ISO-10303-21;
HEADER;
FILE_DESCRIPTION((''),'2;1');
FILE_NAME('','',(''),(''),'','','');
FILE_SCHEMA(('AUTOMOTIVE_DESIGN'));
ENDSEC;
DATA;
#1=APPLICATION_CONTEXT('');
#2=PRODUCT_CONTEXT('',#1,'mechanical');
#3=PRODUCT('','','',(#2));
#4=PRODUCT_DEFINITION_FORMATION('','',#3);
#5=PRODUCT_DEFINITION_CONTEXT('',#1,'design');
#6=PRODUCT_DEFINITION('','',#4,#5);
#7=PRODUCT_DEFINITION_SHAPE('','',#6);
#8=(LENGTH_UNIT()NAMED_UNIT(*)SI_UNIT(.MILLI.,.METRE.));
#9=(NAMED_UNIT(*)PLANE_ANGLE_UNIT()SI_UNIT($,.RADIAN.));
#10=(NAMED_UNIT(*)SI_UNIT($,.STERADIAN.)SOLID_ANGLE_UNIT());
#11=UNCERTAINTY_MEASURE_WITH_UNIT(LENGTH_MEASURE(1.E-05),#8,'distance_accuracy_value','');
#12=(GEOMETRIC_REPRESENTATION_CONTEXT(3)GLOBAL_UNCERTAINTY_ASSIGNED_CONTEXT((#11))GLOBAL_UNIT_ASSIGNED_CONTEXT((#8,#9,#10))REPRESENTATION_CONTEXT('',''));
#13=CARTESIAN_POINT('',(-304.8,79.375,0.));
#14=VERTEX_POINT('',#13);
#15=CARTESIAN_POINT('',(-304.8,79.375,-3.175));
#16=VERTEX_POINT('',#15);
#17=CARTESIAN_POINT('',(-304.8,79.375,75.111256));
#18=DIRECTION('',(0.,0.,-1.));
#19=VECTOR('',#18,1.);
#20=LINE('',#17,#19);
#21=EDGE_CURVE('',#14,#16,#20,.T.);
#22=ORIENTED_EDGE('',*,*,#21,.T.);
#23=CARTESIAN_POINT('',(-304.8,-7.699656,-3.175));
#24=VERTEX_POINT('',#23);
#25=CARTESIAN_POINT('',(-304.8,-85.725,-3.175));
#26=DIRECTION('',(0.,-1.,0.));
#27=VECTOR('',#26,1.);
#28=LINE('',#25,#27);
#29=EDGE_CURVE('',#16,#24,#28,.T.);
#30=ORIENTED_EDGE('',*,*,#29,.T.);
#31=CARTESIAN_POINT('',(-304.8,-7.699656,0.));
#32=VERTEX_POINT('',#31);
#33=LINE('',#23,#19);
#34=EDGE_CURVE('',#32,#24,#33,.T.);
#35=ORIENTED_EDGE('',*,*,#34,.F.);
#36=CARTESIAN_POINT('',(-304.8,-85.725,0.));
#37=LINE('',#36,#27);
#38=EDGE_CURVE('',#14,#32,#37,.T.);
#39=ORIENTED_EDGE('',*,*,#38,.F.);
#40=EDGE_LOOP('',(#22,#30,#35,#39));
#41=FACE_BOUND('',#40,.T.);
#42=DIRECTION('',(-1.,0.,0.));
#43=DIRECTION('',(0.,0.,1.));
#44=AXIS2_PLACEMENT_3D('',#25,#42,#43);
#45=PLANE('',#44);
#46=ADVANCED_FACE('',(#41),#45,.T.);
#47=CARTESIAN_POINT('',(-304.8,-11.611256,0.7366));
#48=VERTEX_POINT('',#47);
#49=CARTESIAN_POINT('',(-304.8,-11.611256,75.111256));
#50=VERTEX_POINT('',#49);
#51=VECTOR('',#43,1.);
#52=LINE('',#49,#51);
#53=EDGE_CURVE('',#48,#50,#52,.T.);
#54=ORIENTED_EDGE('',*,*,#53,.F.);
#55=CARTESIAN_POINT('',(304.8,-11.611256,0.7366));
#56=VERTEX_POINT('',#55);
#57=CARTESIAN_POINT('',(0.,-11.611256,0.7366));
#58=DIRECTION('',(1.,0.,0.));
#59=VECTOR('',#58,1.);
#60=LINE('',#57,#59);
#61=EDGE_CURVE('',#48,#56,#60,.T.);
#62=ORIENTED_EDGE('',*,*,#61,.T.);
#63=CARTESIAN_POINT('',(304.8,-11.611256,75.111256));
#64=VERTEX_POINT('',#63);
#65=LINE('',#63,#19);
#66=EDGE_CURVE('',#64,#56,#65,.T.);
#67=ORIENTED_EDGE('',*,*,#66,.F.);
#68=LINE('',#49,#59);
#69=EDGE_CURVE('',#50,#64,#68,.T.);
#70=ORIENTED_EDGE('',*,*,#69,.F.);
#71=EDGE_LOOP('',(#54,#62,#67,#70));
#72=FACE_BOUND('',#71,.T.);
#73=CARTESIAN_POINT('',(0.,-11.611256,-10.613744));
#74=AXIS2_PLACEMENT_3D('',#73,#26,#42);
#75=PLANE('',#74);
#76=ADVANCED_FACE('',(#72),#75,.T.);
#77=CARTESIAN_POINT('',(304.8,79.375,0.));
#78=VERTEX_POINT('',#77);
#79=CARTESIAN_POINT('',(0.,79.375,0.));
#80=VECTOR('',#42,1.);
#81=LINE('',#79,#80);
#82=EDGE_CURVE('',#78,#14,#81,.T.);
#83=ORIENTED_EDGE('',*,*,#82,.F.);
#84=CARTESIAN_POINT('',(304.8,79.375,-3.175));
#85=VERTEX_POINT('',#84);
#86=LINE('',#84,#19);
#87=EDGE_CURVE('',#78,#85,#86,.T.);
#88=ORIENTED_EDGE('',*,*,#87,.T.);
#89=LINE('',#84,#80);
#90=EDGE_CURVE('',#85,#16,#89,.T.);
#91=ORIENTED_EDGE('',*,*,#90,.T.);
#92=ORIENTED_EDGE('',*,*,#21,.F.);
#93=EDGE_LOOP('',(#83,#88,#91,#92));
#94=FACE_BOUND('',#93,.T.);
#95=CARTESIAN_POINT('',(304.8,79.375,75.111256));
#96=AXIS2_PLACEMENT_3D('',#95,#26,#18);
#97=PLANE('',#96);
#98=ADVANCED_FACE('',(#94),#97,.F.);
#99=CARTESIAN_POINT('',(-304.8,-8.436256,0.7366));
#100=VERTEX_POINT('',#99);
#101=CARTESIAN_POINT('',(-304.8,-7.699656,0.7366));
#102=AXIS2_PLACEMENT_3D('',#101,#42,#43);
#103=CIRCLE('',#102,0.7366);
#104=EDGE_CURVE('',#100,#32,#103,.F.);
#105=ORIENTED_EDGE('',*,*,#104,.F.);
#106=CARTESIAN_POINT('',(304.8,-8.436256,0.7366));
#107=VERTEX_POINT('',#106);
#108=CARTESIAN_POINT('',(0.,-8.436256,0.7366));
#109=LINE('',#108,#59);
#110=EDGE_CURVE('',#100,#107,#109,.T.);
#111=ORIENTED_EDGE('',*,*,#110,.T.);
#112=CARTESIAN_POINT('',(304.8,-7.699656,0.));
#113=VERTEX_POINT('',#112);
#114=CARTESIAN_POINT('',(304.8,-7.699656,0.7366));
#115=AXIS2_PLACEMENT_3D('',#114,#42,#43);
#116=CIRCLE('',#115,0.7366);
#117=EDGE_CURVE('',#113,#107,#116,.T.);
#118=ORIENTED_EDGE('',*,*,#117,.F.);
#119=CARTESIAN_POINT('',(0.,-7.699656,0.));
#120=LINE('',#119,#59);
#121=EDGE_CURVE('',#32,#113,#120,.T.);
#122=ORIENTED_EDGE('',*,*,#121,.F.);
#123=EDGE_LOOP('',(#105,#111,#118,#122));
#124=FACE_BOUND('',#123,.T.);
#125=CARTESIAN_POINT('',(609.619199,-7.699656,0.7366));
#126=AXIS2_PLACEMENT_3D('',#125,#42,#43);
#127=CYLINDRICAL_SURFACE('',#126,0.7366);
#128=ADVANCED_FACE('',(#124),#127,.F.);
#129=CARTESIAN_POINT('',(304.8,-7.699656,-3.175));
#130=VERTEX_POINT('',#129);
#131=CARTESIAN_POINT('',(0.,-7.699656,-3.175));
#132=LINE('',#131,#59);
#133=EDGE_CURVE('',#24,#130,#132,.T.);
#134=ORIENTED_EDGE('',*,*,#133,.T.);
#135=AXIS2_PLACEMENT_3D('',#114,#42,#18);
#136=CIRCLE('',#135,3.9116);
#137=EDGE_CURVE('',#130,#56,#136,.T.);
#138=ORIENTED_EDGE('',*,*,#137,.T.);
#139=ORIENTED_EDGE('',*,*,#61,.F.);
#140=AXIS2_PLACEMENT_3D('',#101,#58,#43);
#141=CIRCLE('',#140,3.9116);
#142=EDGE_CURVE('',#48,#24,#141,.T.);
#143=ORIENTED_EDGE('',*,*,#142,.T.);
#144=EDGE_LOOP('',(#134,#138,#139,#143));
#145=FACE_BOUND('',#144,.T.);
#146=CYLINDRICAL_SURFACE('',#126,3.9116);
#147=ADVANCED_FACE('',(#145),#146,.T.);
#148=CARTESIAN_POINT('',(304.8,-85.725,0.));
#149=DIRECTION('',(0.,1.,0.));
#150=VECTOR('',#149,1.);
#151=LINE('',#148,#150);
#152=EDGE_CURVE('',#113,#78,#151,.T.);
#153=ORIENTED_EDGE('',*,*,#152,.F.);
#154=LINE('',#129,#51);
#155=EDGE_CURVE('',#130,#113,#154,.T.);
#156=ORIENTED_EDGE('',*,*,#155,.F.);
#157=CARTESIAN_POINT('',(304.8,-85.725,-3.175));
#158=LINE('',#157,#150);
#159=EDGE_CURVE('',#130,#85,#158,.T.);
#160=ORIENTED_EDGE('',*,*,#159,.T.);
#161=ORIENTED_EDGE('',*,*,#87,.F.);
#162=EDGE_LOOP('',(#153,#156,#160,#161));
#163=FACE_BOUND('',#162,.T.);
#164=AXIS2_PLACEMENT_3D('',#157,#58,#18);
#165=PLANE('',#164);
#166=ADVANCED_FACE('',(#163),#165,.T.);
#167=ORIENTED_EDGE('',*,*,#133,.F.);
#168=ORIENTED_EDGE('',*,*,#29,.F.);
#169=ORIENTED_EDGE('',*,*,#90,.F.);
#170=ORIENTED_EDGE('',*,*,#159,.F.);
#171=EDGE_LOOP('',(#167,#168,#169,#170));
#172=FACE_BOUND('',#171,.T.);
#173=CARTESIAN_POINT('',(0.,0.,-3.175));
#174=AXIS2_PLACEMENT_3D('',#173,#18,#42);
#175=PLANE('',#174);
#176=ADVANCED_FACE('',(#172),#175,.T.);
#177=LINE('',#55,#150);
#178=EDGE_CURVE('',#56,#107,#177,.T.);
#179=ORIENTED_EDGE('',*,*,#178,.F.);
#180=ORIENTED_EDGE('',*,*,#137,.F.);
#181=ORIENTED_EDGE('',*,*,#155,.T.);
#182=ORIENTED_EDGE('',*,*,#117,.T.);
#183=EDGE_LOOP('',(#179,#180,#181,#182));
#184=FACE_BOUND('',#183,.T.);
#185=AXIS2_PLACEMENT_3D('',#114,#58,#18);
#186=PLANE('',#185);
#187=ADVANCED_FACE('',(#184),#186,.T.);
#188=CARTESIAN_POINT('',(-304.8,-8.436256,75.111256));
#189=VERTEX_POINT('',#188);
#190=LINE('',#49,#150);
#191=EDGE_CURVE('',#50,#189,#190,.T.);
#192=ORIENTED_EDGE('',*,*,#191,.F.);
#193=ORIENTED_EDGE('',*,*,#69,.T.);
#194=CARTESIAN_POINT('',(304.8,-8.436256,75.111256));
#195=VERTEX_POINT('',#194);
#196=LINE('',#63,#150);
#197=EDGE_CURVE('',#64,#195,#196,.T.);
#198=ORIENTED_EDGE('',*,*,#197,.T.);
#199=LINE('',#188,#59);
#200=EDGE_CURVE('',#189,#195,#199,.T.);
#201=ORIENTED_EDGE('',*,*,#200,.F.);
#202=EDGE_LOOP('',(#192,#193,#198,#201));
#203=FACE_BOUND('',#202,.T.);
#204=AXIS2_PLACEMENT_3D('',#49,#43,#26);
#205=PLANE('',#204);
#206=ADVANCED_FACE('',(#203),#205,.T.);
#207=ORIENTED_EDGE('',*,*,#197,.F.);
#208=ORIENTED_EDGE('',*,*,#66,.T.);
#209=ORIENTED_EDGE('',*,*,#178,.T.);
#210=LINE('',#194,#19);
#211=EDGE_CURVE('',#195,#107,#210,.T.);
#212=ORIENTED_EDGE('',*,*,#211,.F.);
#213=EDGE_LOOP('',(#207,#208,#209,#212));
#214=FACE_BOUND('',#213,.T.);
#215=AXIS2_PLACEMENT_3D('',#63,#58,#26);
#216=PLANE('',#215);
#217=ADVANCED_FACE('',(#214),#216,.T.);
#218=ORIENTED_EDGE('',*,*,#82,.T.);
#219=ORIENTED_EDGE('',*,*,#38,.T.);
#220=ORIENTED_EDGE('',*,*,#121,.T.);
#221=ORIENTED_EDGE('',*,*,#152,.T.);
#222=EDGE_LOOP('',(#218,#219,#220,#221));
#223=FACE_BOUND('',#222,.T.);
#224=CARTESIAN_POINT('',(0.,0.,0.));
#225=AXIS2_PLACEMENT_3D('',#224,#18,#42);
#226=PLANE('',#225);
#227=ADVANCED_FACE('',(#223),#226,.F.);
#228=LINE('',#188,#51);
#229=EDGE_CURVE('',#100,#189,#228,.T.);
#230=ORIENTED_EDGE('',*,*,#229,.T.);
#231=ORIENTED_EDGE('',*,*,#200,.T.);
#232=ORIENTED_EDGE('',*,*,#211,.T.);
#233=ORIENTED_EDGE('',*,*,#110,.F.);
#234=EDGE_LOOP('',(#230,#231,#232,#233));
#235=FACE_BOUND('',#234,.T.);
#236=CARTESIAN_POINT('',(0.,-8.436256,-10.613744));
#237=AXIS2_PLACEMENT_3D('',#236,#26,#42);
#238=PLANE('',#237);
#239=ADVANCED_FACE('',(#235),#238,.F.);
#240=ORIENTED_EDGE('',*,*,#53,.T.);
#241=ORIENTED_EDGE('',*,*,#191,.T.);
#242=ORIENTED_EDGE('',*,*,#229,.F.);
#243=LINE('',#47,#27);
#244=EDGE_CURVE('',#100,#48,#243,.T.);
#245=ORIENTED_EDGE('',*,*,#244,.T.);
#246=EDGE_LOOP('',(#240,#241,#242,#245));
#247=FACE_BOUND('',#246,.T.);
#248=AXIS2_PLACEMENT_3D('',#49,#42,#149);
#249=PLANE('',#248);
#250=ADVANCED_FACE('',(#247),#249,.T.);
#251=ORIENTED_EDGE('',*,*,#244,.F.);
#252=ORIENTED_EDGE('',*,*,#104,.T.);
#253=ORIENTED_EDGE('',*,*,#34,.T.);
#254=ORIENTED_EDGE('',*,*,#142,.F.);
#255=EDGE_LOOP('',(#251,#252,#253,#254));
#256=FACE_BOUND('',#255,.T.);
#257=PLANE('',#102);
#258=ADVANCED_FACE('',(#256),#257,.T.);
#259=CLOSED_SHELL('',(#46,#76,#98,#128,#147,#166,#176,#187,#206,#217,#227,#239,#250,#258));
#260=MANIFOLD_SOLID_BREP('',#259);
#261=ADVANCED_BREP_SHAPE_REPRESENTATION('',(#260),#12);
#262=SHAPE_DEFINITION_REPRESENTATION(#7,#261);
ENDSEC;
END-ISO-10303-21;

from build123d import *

# Parameters (mm, degrees)
SKETCH8_W              = 609.6
SKETCH8_H              = 171.45
BASE_FLANGE3_DEPTH     = 3.175
SKETCHED_START         = -304.8
SKETCHED_BEND3_DEPTH   = 609.6
SKETCHED_BEND3_2_DEPTH = 609.6
SKETCH19_W             = 609.6
SKETCH19_H             = 6.35
CUT_EXTRUDE1_DEPTH     = 327.160318745


# Read off the part's stored shape, not the designer's step: Sketched Bend3
# Sheet-metal steps are written as plain solids
with BuildPart() as part:
    # Sketch8 → Base-Flange3 (new body)
    with BuildSketch(Plane.XY):
        Rectangle(SKETCH8_W, SKETCH8_H)
    extrude(amount=-BASE_FLANGE3_DEPTH)

    # Sketched Bend3 outline → Sketched Bend3 (cut)
    with BuildSketch(Plane.YZ.offset(SKETCHED_START)):
        with BuildLine():
            ThreePointArc((-7.699656128, -3.175), (-10.191576071, -2.278520157), (-11.541274928, 0))
            Line((-11.541274928, 0), (-85.725, 0))
            Line((-85.725, 0), (-85.725, -3.175))
            Line((-85.725, -3.175), (-7.699656128, -3.175))
        make_face()
    extrude(amount=SKETCHED_BEND3_DEPTH, mode=Mode.SUBTRACT)

    # Sketched Bend3 2 outline → Sketched Bend3 2 (add)
    with BuildSketch(Plane.YZ.offset(SKETCHED_START)):
        with BuildLine():
            Line((-8.436256128, 75.111256128), (-11.611256128, 75.111256128))
            Line((-11.611256128, 75.111256128), (-11.611256128, 0.7366))
            ThreePointArc((-11.611256128, 0.7366), (-11.593721527, 0.366641581), (-11.541274928, 0))
            Line((-11.541274928, 0), (-7.699656128, 0))
            ThreePointArc((-7.699656128, 0), (-8.220510983, 0.215745145), (-8.436256128, 0.7366))
            Line((-8.436256128, 0.7366), (-8.436256128, 75.111256128))
        make_face()
    extrude(amount=SKETCHED_BEND3_2_DEPTH)

    # Sketch19 → Cut-Extrude1 (cut, through all)
    with BuildSketch(Plane(origin=(0, 0, -3.175), x_dir=(-1, 0, 0), z_dir=(0, 0, -1))):
        with Locations((0, 82.55)):
            Rectangle(SKETCH19_W, SKETCH19_H)
    extrude(amount=-CUT_EXTRUDE1_DEPTH, mode=Mode.SUBTRACT)


solid = part.part
